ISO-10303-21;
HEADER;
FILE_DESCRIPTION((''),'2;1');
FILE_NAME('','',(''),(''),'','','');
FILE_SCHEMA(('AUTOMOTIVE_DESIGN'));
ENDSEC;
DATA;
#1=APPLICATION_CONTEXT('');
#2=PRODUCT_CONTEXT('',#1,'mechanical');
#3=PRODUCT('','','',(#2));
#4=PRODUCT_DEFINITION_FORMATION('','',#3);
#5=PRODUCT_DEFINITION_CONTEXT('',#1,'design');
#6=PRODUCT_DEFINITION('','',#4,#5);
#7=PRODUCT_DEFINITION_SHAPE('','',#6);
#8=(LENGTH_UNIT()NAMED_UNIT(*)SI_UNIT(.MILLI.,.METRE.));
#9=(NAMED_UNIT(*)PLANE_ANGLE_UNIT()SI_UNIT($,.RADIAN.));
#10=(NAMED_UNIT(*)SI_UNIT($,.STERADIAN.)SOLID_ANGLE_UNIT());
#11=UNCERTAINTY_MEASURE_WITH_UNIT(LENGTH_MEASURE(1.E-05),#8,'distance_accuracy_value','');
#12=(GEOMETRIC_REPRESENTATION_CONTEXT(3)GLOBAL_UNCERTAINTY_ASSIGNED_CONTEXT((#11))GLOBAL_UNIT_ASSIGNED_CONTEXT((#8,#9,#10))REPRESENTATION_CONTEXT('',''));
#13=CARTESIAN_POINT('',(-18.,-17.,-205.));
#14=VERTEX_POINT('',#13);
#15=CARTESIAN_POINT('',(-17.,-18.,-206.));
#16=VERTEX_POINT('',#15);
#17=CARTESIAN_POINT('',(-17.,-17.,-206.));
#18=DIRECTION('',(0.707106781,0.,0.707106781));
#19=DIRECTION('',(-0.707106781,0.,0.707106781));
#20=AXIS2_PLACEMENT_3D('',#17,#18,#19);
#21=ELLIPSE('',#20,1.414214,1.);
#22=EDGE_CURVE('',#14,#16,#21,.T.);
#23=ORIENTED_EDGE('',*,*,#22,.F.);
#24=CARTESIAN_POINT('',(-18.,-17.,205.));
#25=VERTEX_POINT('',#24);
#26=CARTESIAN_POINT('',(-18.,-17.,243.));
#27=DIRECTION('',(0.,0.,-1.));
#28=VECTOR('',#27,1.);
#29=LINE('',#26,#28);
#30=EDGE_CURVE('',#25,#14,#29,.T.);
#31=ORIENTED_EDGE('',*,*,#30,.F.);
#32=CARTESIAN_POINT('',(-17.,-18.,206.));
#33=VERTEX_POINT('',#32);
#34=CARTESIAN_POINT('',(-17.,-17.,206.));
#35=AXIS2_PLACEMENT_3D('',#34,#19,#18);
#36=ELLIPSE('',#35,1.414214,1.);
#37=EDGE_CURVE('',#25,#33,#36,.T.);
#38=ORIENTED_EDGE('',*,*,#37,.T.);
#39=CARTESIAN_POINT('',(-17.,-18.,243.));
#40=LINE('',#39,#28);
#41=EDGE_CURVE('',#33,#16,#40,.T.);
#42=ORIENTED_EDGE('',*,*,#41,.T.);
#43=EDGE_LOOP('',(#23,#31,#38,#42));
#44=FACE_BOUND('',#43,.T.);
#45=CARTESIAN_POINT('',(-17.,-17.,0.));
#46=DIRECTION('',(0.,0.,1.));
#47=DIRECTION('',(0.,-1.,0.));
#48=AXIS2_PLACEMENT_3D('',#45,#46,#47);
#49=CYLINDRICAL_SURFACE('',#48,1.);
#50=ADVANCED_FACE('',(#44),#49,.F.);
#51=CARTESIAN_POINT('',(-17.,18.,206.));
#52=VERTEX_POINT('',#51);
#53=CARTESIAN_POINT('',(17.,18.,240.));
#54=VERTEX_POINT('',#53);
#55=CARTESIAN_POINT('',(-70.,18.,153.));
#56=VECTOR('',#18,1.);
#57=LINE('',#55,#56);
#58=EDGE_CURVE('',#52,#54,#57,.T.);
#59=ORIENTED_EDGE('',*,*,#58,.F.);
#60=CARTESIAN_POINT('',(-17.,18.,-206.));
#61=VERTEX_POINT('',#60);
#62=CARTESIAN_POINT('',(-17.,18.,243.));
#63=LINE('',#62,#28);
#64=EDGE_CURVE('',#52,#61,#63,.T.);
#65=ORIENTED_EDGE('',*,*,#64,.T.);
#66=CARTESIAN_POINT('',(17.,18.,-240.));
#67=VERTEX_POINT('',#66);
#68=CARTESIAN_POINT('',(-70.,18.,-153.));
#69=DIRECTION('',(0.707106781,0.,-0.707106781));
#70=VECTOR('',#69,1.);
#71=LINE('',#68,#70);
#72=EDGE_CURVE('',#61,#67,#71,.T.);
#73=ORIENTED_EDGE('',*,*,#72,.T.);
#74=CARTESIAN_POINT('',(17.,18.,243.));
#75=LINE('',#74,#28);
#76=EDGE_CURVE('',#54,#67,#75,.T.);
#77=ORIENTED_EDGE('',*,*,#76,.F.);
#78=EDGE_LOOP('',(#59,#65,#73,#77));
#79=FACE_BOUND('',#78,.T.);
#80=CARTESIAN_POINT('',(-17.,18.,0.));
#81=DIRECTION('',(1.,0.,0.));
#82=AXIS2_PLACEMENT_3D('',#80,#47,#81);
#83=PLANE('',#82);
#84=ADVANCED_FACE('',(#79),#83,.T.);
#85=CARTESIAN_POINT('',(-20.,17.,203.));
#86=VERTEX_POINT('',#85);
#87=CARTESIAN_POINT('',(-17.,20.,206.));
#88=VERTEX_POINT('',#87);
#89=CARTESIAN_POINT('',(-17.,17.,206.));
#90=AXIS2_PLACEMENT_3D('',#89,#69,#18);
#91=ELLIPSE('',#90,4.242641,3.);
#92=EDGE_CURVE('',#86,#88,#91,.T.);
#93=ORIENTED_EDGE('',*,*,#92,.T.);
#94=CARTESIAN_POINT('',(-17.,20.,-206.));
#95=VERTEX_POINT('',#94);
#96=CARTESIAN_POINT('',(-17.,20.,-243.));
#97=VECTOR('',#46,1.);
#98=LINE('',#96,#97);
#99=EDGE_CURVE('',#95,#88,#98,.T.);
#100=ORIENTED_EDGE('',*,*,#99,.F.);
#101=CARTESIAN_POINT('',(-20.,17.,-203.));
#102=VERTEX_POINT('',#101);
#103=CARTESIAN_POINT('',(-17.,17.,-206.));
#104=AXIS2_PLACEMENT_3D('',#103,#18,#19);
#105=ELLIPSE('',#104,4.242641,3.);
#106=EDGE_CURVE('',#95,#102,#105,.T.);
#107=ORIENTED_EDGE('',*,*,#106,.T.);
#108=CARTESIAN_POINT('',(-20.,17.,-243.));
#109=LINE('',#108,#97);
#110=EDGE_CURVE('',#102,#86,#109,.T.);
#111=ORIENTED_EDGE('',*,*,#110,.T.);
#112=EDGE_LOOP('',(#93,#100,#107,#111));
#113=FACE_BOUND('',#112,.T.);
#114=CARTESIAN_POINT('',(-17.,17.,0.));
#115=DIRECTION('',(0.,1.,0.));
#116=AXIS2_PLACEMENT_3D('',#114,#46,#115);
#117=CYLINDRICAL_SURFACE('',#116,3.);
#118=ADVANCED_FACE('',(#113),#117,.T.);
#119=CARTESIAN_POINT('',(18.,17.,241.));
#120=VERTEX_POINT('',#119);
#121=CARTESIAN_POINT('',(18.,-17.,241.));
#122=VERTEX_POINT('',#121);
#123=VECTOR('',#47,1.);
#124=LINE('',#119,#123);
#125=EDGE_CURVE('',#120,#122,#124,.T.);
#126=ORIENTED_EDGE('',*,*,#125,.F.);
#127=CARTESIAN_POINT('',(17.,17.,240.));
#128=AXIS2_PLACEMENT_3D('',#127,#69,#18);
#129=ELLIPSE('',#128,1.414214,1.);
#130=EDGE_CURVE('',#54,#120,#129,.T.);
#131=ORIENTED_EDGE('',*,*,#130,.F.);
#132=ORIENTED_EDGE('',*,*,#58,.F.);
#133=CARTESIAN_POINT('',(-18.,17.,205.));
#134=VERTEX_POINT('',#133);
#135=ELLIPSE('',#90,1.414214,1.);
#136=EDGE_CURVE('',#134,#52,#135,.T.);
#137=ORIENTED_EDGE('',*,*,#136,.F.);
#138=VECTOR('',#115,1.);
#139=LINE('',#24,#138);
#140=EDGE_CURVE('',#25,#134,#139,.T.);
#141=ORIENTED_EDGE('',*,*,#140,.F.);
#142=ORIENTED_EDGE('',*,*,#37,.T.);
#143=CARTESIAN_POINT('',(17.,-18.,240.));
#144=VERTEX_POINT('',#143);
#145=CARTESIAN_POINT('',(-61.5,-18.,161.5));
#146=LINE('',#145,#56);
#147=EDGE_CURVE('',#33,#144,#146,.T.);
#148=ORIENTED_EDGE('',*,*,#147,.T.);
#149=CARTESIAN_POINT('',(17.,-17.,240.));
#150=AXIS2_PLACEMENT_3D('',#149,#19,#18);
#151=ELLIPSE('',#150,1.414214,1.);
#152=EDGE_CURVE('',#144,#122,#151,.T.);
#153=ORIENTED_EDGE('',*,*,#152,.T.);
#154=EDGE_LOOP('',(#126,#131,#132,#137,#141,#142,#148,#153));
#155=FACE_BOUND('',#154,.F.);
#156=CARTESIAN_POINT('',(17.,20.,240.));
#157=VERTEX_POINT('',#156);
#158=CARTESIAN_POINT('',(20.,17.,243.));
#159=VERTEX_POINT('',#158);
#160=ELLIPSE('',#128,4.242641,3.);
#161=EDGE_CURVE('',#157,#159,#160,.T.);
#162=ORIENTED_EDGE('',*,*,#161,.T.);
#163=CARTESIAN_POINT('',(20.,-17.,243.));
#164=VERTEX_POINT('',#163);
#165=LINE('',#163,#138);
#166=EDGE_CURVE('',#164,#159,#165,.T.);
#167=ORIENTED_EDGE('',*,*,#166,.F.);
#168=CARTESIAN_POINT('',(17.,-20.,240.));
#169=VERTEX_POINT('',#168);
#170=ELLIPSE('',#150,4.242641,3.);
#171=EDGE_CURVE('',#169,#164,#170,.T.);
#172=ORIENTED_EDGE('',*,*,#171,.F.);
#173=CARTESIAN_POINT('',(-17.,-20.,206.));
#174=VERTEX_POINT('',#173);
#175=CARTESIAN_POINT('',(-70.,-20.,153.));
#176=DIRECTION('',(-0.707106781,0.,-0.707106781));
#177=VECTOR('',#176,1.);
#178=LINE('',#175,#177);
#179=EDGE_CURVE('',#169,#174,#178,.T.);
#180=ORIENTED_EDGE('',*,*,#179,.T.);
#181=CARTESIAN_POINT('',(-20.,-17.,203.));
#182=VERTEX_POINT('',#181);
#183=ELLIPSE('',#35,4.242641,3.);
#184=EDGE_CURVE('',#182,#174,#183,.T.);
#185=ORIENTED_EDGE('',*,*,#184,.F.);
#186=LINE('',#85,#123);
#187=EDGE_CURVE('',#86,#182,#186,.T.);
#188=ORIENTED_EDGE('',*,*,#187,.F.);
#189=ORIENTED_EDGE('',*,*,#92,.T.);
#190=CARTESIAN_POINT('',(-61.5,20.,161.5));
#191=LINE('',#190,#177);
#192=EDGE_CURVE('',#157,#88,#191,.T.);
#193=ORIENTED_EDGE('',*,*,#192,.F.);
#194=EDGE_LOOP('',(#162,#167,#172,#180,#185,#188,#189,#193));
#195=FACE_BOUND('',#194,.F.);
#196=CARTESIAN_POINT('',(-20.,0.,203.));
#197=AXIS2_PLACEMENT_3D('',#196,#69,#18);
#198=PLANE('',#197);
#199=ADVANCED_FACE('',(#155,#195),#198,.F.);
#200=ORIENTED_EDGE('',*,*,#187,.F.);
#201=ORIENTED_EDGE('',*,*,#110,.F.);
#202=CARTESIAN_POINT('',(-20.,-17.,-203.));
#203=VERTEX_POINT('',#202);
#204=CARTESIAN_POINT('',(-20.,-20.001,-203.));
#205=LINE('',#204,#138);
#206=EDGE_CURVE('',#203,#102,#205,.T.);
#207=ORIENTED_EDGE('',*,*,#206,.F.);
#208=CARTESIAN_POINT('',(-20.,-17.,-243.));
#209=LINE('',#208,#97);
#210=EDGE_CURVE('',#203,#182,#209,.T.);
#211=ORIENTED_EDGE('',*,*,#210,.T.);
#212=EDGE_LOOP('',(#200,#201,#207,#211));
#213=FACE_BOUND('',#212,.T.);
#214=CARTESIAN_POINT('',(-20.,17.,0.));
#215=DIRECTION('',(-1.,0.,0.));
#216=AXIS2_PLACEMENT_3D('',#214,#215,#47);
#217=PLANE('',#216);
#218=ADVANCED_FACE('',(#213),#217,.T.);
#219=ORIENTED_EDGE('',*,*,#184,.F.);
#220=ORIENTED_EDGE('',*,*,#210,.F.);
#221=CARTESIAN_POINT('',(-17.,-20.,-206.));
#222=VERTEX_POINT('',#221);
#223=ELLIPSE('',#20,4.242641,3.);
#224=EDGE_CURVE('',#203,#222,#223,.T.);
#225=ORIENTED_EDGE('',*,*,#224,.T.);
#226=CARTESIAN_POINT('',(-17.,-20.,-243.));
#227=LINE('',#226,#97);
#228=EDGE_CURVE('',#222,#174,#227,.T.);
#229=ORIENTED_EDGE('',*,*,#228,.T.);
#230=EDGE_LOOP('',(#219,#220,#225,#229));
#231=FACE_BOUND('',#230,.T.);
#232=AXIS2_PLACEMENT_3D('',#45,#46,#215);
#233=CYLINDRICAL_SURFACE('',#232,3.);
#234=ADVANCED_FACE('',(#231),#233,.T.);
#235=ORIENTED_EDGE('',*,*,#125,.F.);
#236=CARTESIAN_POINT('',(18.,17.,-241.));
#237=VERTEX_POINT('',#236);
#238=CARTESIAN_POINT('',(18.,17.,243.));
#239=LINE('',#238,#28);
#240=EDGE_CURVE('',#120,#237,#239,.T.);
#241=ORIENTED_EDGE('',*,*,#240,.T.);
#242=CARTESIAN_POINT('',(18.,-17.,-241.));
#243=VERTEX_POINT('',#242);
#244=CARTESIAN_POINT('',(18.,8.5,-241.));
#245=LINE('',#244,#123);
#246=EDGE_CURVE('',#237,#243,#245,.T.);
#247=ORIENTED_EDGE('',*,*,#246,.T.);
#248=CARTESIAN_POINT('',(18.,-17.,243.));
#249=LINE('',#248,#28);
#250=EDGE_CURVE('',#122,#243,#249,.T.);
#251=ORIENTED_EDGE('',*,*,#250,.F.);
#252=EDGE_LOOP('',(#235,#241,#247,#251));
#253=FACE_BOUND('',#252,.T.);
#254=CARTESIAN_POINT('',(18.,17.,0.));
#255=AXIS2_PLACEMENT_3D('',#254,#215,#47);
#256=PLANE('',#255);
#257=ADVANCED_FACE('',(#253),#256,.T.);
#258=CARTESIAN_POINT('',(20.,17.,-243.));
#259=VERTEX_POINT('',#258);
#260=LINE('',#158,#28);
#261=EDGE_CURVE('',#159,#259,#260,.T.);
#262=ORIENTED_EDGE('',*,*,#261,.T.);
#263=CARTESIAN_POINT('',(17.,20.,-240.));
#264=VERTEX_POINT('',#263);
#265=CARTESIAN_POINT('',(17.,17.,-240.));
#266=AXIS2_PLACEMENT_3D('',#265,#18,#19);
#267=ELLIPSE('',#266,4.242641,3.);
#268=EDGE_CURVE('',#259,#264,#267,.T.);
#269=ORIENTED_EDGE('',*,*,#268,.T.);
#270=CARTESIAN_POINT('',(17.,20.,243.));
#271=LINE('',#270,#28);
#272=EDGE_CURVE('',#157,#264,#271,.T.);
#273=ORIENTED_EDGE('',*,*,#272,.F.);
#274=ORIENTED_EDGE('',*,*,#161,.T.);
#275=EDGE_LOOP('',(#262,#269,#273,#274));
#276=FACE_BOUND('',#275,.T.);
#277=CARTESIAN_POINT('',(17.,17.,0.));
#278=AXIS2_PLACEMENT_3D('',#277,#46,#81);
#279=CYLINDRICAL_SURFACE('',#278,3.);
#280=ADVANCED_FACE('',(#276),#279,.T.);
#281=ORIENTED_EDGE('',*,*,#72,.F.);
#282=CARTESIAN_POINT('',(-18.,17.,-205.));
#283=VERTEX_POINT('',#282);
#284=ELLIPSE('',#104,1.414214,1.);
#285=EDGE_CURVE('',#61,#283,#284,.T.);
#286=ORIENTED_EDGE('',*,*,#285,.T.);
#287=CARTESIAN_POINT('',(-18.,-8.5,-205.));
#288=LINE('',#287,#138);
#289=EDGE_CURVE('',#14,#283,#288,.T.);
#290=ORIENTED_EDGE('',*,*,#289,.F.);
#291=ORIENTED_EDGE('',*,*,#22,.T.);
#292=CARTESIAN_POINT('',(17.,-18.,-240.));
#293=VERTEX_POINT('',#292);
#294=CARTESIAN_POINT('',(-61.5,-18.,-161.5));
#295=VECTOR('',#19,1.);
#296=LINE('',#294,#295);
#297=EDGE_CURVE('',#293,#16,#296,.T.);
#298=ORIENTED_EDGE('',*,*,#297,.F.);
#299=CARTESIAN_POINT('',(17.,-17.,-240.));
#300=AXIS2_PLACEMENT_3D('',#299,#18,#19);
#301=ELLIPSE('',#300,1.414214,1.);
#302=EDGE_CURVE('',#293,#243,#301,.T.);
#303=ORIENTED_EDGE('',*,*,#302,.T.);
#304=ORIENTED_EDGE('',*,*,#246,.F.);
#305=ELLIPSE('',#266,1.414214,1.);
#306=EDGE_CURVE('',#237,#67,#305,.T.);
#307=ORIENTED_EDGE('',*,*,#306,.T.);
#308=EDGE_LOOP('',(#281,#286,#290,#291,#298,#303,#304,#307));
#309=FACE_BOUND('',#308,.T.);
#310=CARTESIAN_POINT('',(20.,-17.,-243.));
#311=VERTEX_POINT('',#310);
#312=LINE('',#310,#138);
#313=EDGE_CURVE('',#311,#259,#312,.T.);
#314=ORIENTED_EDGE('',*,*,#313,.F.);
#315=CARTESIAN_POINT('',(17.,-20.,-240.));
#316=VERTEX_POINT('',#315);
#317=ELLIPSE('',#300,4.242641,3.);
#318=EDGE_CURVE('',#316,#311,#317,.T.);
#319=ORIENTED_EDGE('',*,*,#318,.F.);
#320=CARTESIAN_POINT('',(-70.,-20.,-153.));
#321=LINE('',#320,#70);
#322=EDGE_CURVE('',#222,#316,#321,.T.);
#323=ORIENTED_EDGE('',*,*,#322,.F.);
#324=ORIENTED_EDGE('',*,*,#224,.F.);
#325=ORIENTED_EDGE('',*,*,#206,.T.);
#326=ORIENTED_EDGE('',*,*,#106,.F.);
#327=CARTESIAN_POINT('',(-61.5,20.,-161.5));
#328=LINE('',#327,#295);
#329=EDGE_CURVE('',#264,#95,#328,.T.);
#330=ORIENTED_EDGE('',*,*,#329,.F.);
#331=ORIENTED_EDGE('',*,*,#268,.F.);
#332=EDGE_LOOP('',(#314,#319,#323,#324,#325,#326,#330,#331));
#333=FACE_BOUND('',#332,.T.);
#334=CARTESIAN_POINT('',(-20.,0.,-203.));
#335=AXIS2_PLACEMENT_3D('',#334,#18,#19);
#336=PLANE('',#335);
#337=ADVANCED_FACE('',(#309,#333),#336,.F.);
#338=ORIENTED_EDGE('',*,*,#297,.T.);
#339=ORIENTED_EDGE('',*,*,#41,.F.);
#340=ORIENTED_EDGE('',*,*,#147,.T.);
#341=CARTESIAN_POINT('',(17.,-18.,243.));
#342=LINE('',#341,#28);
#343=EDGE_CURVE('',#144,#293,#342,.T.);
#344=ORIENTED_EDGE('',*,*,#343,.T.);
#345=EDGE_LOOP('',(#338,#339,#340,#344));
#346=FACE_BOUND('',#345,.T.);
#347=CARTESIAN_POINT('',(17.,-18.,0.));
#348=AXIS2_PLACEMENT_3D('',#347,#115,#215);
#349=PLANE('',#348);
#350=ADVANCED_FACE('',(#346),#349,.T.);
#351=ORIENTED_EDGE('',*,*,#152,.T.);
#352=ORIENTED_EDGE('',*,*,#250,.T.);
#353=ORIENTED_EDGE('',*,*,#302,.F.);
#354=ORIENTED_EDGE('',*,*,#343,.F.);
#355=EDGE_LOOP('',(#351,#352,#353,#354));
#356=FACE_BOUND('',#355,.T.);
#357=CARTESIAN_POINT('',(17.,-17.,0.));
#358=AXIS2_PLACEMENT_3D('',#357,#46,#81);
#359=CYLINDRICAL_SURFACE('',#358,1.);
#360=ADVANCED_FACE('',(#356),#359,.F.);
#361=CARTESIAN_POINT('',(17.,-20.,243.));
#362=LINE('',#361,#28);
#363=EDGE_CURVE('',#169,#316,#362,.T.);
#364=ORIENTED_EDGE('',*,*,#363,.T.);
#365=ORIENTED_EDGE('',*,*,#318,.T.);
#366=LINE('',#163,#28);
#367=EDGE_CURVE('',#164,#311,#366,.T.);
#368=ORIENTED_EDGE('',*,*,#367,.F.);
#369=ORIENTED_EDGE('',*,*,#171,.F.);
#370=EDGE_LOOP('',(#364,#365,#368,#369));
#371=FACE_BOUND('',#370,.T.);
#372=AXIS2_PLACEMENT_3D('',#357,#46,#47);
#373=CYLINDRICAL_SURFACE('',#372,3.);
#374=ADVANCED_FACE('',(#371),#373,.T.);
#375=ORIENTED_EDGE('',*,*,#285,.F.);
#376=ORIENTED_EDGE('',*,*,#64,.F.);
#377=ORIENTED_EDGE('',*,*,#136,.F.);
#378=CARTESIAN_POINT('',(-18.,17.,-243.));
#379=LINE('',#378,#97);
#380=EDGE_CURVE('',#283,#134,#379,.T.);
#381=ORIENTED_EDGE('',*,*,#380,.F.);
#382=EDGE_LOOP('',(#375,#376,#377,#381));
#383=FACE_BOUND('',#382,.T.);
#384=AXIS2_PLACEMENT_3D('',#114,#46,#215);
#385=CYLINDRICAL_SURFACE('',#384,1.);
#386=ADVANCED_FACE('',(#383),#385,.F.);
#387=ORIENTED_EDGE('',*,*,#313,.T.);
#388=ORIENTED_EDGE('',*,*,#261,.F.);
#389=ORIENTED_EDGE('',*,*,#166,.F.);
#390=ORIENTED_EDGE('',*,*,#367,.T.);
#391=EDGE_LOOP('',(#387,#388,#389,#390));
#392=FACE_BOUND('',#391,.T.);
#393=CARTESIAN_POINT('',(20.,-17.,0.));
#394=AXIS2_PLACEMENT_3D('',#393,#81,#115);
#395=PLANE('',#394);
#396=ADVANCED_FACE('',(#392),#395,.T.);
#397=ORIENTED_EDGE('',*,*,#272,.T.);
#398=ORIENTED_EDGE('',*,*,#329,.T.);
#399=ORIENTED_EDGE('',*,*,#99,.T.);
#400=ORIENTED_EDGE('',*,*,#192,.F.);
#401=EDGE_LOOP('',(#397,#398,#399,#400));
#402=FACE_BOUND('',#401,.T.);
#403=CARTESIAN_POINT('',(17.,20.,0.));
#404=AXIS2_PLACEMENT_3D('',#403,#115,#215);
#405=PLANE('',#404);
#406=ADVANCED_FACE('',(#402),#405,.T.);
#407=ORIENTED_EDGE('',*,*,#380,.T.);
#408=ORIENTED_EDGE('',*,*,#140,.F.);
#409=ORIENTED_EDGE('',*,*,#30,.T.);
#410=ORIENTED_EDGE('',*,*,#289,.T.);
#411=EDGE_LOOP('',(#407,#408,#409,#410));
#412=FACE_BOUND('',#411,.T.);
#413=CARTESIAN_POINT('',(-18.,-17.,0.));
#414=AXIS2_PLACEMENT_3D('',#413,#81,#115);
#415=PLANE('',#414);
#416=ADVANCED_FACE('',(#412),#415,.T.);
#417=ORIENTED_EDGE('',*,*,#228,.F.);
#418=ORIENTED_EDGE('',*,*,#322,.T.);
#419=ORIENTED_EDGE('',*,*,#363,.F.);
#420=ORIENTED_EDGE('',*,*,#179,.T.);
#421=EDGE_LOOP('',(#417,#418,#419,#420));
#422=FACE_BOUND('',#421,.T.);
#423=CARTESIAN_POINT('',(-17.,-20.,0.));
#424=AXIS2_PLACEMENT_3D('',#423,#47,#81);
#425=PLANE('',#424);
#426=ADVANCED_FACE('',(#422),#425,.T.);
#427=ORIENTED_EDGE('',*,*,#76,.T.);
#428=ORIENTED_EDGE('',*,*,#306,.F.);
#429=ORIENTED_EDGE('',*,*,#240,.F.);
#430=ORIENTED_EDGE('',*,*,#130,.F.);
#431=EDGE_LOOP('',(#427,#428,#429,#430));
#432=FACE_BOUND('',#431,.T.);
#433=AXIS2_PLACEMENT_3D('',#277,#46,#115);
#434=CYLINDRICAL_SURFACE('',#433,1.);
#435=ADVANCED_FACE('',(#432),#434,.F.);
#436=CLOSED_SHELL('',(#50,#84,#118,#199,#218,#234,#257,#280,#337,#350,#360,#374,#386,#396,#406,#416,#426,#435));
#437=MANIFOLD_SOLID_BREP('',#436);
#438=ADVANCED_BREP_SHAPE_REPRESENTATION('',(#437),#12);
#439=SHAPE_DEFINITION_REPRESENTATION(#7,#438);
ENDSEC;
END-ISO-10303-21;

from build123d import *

# Parameters (mm, degrees)
F1_DEPTH      = 243
F3_DEPTH      = 20.001
F3_DEPTH_BACK = 20.001


# Not quite as in the source:
# - a pattern or mirror of a feature is missing from the dataset's text; its kind, count and spacing are read off the source's solid


with BuildPart() as f1:
    # F0 (on Top) → F1 (new body, symmetric)
    with BuildSketch(Plane.XY):
        with BuildLine():
            Line((17, 20), (-17, 20))
            ThreePointArc((-17, 20), (-19.1213203436, 19.1213203436), (-20, 17))
            Line((-20, 17), (-20, -17))
            ThreePointArc((-20, -17), (-19.1213203436, -19.1213203436), (-17, -20))
            Line((-17, -20), (17, -20))
            ThreePointArc((17, -20), (19.1213203436, -19.1213203436), (20, -17))
            Line((20, -17), (20, 17))
            ThreePointArc((20, 17), (19.1213203436, 19.1213203436), (17, 20))
        make_face()
        with BuildLine():
            ThreePointArc((-18, 17), (-17.7071067812, 17.7071067812), (-17, 18))
            Line((-17, 18), (17, 18))
            ThreePointArc((17, 18), (17.7071067812, 17.7071067812), (18, 17))
            Line((18, 17), (18, -17))
            ThreePointArc((18, -17), (17.7071067812, -17.7071067812), (17, -18))
            Line((17, -18), (-17, -18))
            ThreePointArc((-17, -18), (-17.7071067812, -17.7071067812), (-18, -17))
            Line((-18, -17), (-18, 17))
        make_face(mode=Mode.SUBTRACT)
    extrude(amount=F1_DEPTH, both=True)

    # F2 (on Front) → F3 (cut, two sides)
    with BuildSketch(Plane.XZ) as f3_sk:
        Polygon((20, 243), (-20, 243), (-20, 203), align=None)
    f3 = extrude(amount=-F3_DEPTH, mode=Mode.SUBTRACT) + extrude(f3_sk.sketch, amount=F3_DEPTH_BACK, mode=Mode.SUBTRACT)

    # F3_copies: F3 across plane
    add(f3.mirror(Plane(origin=(0, 0, 0), x_dir=(-1, 0, 0), z_dir=(0, 0, -1))), mode=Mode.SUBTRACT)


solid = f1.part
